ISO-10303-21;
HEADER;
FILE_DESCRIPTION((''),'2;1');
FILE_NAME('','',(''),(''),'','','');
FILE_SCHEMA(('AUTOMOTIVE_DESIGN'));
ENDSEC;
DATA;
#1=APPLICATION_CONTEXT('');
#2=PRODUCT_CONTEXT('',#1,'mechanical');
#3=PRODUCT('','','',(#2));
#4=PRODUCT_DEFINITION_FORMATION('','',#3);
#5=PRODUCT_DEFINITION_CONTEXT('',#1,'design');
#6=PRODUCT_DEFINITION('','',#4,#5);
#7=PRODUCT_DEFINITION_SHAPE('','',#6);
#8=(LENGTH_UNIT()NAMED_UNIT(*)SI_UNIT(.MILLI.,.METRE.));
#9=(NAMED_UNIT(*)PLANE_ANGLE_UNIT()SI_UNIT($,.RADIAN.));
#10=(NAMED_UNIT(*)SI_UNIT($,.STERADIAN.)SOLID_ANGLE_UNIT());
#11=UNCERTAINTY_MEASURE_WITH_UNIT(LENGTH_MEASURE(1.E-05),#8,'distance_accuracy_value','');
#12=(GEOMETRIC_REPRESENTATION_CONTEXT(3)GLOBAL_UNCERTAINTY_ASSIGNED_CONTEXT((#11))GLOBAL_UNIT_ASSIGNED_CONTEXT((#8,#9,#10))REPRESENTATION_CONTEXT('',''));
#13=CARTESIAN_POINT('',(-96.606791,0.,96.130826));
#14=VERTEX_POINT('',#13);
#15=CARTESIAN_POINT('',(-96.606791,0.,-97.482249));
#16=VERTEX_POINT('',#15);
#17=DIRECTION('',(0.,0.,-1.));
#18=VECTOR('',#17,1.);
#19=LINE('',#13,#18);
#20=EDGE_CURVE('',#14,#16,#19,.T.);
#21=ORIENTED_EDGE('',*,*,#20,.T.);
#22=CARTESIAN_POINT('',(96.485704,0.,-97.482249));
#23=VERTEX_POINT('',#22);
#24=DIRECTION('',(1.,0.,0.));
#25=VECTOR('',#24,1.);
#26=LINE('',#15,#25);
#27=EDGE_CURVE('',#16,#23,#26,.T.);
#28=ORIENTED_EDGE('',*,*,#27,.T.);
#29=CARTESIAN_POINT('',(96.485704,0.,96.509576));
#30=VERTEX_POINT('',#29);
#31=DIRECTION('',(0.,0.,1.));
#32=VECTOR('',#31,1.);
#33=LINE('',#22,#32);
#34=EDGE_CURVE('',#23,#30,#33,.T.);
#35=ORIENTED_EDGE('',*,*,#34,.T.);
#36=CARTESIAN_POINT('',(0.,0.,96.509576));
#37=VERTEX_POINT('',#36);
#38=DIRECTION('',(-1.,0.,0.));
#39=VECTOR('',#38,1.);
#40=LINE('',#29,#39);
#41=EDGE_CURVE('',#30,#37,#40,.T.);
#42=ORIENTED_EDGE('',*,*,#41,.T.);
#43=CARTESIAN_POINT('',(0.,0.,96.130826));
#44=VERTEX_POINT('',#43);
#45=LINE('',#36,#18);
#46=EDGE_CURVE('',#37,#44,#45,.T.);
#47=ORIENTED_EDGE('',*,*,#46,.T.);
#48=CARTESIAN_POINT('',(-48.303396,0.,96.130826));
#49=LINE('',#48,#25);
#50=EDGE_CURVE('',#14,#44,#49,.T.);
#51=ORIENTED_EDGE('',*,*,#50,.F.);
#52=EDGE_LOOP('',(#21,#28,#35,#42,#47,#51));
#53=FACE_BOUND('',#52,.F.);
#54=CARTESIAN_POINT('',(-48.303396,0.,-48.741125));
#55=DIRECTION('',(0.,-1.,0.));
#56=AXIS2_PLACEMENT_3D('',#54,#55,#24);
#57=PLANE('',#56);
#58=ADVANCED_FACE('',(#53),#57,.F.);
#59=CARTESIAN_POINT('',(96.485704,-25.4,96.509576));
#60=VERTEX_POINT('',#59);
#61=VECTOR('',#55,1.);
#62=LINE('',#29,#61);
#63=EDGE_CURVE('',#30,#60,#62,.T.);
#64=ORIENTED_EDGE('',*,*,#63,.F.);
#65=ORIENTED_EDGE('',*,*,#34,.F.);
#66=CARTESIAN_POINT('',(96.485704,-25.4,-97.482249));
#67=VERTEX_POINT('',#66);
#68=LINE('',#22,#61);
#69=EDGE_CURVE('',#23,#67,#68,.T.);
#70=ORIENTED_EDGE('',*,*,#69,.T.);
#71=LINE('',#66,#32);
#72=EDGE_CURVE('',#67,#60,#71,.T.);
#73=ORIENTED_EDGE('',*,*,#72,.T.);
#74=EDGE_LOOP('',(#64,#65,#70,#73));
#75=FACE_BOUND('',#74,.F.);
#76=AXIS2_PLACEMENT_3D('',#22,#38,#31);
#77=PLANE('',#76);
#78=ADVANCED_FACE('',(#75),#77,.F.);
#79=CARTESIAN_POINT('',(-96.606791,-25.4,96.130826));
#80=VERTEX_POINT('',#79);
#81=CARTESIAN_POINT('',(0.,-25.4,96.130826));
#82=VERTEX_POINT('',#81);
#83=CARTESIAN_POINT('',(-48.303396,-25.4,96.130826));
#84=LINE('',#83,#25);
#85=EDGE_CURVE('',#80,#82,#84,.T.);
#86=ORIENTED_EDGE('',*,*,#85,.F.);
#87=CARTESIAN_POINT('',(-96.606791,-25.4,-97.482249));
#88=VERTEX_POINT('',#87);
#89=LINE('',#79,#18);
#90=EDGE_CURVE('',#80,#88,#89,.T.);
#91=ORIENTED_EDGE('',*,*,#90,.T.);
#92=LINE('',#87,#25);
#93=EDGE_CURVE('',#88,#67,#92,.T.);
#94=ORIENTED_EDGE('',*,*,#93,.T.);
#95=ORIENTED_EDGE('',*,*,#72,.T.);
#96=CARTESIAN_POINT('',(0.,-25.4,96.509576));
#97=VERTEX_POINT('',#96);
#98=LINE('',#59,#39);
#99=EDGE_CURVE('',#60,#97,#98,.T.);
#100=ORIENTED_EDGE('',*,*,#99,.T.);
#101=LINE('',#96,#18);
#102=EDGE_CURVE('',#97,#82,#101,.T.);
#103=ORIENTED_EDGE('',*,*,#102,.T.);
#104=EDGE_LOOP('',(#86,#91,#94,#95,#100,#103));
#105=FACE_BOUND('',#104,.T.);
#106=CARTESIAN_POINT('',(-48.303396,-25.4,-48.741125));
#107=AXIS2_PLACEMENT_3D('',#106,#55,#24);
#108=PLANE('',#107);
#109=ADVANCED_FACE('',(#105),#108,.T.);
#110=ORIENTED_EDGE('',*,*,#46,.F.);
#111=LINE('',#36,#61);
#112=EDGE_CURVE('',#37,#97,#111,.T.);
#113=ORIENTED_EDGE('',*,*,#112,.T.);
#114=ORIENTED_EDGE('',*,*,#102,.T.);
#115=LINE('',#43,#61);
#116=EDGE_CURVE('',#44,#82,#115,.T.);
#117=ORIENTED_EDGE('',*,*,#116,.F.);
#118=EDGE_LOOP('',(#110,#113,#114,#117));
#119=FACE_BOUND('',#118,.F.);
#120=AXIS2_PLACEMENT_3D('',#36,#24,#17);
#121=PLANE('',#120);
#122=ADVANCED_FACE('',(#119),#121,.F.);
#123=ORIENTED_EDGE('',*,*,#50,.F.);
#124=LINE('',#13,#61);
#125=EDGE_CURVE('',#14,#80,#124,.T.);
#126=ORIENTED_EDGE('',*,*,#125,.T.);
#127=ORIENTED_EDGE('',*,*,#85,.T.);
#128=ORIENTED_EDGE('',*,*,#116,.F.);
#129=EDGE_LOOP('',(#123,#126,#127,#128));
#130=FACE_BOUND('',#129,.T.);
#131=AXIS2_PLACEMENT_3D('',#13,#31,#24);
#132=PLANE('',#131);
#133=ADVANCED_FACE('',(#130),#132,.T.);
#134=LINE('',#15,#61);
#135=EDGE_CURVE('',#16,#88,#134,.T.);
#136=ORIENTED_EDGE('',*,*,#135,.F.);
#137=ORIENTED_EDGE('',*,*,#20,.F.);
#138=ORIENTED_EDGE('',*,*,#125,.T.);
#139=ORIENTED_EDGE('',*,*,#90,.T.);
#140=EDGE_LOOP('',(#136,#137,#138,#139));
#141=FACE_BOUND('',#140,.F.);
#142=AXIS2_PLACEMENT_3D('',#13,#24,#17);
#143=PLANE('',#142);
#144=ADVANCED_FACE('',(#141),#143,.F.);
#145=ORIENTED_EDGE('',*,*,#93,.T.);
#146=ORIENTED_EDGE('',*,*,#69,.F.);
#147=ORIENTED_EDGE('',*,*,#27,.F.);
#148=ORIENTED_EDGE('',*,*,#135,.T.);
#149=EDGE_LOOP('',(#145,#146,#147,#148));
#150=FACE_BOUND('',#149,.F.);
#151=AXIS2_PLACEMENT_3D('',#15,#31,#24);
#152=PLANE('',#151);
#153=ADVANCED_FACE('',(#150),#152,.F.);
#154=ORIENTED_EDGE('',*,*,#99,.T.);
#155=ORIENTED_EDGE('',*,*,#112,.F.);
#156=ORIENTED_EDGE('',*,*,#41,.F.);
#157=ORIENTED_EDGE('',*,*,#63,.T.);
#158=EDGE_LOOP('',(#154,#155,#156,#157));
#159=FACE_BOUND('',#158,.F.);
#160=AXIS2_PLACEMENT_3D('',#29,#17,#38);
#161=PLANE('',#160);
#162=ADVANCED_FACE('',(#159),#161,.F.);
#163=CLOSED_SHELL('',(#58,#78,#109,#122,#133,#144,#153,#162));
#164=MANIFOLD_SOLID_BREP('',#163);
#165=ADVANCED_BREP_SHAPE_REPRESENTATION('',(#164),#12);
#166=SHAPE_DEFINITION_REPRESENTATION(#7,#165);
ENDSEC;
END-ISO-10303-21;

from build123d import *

# Parameters (mm, degrees)
F0_W     = 96.6067910194
F0_H     = 96.1308255792
F0_W_2   = 96.4857041836
F0_H_2   = 0.4863366485
F0_H_3   = 96.9959124923
F1_DEPTH = 25.4


with BuildPart() as f1:
    # F0 (on Front) → F1 (new body)
    with BuildSketch(Plane.XZ):
        Polygon((0, -0.4863366485), (0, 0), (-96.6067910194, 0), (-96.6067910194, -97.4822491407), (0, -97.4822491407), align=None)
        with Locations((-48.3033955097, 48.0654127896)):
            Rectangle(F0_W, F0_H)
        with Locations((48.2428520918, -0.2431683242)):
            Rectangle(F0_W_2, F0_H_2)
        Polygon((0, 96.1308255792), (0, 0), (96.4857041836, 0), (96.4857041836, 96.5095758438), (0, 96.5095758438), align=None)
        with Locations((48.2428520918, -48.9842928946)):
            Rectangle(F0_W_2, F0_H_3)
    extrude(amount=F1_DEPTH)


solid = f1.part
